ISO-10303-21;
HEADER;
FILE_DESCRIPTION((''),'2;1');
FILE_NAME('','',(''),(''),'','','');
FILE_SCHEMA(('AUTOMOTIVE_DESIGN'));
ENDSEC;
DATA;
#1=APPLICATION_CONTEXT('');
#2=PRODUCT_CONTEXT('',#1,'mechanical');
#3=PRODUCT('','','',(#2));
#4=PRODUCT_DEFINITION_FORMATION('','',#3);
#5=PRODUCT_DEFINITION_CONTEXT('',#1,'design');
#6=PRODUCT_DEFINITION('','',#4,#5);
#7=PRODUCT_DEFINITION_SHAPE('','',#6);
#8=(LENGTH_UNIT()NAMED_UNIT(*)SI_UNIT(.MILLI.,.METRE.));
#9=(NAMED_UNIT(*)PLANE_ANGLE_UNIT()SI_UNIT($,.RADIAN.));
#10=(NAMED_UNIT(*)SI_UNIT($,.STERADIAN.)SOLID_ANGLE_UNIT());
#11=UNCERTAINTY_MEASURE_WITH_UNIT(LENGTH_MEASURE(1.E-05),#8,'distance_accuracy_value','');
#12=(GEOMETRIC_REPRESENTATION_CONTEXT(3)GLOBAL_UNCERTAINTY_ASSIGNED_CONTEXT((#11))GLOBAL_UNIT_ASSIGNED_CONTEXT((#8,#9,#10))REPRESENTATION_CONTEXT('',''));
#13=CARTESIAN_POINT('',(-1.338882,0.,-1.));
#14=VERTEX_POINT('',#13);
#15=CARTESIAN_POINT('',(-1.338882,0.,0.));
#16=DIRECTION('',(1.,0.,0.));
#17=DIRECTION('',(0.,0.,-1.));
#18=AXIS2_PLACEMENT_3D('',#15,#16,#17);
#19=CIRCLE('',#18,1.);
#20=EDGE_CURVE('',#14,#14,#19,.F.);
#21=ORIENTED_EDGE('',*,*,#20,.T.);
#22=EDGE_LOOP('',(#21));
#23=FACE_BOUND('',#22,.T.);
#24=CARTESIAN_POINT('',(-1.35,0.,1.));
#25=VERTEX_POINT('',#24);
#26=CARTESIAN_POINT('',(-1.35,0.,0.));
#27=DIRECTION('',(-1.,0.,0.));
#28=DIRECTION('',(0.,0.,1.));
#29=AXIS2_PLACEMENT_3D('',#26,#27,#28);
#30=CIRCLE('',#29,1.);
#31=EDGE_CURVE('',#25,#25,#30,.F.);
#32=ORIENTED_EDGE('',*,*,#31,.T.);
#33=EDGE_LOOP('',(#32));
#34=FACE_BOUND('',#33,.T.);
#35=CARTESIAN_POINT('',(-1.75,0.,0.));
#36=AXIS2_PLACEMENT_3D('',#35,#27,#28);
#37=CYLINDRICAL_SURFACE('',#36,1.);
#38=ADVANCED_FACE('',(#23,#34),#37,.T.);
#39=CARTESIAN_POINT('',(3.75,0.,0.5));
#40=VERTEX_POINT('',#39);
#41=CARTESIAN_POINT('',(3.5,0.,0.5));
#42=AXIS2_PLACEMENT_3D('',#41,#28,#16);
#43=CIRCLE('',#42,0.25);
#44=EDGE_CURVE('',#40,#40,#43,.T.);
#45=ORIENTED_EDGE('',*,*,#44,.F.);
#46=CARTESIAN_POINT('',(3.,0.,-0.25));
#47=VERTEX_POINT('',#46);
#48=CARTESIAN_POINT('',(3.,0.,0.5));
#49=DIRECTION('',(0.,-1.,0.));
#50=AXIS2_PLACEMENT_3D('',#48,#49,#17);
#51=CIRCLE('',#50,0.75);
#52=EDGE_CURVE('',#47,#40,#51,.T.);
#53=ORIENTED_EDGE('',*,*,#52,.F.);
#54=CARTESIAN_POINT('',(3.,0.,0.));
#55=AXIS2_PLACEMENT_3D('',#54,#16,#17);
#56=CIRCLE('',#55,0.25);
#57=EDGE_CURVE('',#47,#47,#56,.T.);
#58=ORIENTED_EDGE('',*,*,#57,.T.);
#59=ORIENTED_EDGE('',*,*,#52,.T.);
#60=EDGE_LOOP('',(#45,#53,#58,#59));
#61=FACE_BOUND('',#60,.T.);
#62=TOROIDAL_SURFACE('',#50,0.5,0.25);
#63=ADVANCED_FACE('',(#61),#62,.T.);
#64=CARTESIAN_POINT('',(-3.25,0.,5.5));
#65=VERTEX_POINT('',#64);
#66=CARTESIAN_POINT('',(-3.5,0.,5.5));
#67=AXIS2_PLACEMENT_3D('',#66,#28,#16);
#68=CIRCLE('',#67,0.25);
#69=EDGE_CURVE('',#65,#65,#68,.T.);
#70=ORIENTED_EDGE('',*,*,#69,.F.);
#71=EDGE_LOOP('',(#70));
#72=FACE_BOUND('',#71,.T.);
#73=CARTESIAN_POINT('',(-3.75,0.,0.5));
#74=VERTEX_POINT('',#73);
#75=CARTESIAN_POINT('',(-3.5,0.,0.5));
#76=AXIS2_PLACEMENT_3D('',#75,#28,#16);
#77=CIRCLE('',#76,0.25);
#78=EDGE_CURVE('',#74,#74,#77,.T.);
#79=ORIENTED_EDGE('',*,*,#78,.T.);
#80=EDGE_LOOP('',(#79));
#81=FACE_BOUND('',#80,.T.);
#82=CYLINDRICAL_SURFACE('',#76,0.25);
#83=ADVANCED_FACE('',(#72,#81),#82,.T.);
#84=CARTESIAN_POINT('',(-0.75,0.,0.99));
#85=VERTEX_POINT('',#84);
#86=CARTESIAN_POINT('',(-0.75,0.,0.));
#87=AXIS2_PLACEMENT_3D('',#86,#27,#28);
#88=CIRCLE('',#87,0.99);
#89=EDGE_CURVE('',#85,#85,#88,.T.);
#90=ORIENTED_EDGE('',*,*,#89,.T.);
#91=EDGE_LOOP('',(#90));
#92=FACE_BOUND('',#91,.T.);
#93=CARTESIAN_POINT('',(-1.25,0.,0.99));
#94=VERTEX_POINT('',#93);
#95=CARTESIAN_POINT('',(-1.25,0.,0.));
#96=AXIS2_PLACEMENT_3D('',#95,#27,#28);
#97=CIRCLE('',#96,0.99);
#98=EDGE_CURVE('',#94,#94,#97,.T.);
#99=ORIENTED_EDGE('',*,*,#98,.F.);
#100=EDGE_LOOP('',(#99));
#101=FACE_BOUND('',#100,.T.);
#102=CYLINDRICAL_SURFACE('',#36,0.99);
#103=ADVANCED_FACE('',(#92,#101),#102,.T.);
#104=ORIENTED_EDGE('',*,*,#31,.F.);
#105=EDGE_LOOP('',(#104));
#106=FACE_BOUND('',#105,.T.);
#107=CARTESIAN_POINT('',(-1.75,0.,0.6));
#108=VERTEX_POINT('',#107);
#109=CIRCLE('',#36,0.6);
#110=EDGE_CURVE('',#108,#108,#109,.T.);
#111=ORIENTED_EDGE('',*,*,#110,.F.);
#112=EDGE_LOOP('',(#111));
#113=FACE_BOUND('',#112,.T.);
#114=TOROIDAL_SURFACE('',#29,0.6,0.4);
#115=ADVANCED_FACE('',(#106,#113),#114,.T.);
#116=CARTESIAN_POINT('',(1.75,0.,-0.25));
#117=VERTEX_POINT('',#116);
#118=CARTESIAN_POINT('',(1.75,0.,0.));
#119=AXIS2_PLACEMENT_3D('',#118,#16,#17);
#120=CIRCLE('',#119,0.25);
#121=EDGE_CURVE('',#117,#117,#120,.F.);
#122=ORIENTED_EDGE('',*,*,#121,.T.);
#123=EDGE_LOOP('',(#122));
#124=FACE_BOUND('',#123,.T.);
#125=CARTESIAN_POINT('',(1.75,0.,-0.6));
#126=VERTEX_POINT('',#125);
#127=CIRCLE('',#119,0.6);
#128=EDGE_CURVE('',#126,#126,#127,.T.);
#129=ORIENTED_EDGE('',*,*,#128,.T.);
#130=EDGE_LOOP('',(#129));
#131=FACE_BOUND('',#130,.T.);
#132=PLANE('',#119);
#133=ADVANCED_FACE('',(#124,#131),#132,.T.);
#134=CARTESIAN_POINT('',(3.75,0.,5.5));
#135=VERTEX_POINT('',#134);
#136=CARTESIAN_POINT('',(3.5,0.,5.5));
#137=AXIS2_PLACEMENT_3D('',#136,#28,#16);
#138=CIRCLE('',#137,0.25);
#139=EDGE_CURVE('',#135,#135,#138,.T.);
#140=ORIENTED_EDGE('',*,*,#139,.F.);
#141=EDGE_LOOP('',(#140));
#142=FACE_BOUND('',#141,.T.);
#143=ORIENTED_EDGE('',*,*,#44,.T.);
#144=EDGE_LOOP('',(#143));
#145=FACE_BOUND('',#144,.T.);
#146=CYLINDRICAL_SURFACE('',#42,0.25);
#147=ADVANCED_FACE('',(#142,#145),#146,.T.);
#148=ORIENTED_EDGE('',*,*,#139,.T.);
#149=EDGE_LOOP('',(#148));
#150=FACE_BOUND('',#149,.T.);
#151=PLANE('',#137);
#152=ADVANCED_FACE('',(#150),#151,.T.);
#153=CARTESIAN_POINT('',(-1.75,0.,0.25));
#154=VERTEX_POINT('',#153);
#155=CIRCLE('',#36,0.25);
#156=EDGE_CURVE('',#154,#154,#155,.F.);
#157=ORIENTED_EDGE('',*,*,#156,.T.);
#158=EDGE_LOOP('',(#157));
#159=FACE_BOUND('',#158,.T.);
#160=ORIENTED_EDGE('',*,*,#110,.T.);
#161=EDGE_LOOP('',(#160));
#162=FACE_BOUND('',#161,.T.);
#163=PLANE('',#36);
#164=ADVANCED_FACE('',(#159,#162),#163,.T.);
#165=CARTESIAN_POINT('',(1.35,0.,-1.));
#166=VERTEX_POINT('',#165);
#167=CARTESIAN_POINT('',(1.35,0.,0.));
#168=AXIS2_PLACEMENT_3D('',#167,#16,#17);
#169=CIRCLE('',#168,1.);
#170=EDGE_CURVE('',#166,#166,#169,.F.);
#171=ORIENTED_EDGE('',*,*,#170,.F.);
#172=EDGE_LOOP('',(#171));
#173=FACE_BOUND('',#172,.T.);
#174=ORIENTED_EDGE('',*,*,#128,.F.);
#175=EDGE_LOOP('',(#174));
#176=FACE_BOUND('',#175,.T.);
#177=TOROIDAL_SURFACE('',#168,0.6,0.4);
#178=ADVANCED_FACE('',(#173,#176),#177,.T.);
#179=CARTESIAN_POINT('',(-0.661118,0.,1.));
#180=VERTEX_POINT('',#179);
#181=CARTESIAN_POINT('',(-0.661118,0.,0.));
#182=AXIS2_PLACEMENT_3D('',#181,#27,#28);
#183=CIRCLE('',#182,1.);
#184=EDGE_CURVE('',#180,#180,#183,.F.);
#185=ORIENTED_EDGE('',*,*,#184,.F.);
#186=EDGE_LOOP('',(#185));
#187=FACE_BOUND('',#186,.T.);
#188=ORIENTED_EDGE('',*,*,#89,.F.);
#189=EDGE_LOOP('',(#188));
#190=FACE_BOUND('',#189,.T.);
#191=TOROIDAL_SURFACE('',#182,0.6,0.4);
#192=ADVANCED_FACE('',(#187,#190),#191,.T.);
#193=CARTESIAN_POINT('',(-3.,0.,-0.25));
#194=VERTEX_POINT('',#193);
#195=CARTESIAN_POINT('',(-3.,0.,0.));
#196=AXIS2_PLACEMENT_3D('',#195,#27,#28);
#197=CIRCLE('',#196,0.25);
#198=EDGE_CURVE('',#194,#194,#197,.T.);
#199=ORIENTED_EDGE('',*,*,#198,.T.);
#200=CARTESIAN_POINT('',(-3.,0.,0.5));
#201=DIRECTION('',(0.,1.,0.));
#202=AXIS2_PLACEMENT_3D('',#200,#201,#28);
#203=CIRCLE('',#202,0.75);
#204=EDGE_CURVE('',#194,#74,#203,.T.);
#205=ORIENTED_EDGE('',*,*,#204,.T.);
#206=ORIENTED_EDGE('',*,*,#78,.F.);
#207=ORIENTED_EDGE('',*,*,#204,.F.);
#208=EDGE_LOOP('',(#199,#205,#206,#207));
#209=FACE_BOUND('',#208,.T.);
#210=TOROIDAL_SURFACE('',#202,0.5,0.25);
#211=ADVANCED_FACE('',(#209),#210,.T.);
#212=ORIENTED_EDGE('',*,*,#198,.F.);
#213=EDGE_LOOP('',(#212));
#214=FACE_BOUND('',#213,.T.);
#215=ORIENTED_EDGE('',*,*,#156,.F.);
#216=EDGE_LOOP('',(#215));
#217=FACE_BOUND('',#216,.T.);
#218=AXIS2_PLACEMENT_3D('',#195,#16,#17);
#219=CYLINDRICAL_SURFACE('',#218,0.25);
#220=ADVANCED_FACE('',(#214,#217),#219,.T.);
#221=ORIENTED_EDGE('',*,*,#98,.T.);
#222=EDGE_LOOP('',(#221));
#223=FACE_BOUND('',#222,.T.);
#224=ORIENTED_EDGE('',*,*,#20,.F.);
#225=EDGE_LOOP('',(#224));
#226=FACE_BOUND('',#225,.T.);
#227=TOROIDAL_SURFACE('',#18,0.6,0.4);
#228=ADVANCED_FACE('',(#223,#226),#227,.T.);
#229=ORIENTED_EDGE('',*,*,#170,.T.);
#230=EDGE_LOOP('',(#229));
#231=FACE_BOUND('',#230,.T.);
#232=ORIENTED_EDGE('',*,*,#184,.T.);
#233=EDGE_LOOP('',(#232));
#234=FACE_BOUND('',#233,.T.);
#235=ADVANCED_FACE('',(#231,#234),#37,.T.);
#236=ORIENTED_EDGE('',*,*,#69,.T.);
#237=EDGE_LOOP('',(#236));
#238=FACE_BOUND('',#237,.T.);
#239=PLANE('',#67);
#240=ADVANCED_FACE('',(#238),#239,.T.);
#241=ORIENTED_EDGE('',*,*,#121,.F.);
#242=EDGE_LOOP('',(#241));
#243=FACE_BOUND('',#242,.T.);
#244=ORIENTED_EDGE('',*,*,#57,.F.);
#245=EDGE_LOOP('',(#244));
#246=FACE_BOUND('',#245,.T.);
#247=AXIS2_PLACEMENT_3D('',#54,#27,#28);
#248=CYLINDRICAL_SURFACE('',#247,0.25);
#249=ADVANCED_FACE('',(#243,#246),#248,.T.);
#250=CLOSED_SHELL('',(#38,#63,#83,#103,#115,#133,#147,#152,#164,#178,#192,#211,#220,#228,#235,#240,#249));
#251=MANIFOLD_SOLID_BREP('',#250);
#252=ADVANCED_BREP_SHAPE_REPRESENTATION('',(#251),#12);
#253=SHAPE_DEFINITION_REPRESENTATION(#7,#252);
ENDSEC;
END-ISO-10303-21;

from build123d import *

# Parameters (mm, degrees)
IZIM5_R   = 0.25
IZIM7_R   = 0.25
RADYUS1_R = 0.4
RADYUS2_R = 0.4


with BuildPart() as part:
    # Çizim3 → Döndür2 (revolve)
    with BuildSketch(Plane(origin=(0, 0, 0), x_dir=(1, 0, 0), z_dir=(0, 1, 0))):
        Polygon((-0.75, -1), (1.75, -1), (1.75, 0), (-1.75, 0), (-1.75, -1), (-1.25, -1), (-1.25, -0.99), (-0.75, -0.99), align=None)
    revolve(axis=Axis((-1.75, 0, 0), (1, 0, 0)))

    # Süpür1: sweep along a path in Çizim4
    with BuildLine(Plane(origin=(0, 0, 0), x_dir=(1, 0, 0), z_dir=(0, 1, 0))) as s_p_r1_path:
        Line((-1.578677494, 0), (-3, 0))
        ThreePointArc((-3, 0), (-3.353553391, -0.146446609), (-3.5, -0.5))
        Line((-3.5, -0.5), (-3.5, -5.5))
    # Çizim5 → Süpür1 (sweep)
    with BuildSketch(Plane.ZY.offset(1.578677494)):
        Circle(IZIM5_R)
    sweep(path=s_p_r1_path.line)

    # Süpür2: sweep along a path in Çizim6
    with BuildLine(Plane(origin=(0, 0, 0), x_dir=(1, 0, 0), z_dir=(0, 1, 0))) as s_p_r2_path:
        Line((1.519396703, 0), (3, 0))
        ThreePointArc((3, 0), (3.353553391, -0.146446609), (3.5, -0.5))
        Line((3.5, -0.5), (3.5, -5.5))
    # Çizim7 → Süpür2 (sweep)
    with BuildSketch(Plane(origin=(1.519396703, 0, 0), x_dir=(0, 0, -1), z_dir=(1, 0, 0))):
        Circle(IZIM7_R)
    sweep(path=s_p_r2_path.line)

    # Radyus1
    # the kernel refuses this fillet: 0.4 mm, written as the material it takes off along each edge
    with BuildSketch(Plane(origin=(1.75, 0, 0), x_dir=(0, 0, 1), z_dir=(0, 1, 0))) as radyus1_piece_1:
        with BuildLine():
            CenterArc((1 - RADYUS1_R, -RADYUS1_R), RADYUS1_R, 0, 90)
            Line((1 - RADYUS1_R, 0), (1 - RADYUS1_R, RADYUS1_R * 0.02))
            Line((1 - RADYUS1_R, RADYUS1_R * 0.02), (1 + RADYUS1_R * 0.02, RADYUS1_R * 0.02))
            Line((1 + RADYUS1_R * 0.02, RADYUS1_R * 0.02), (1 + RADYUS1_R * 0.02, -RADYUS1_R))
            Line((1 + RADYUS1_R * 0.02, -RADYUS1_R), (1, -RADYUS1_R))
        make_face()
    revolve(axis=Axis((1.75, 0, 0), (1, 0, 0)), mode=Mode.SUBTRACT)
    with BuildSketch(Plane(origin=(-0.75, 0, 0), x_dir=(0, 0, 1), z_dir=(0, 1, 0))) as radyus1_piece_2:
        with BuildLine():
            CenterArc((0.6, 0.088881944), RADYUS1_R, 347.161431859, 12.838568141)
            Line((0.99, 0), (0.9978, -0.001777639))
            ThreePointArc((0.9978, -0.001777639), (0.995, -0.008), (1, -0.008))
            Line((1, -0.008), (1.008, 0))
            Line((1.008, 0), (1.008, 0.088881944))
            Line((1.008, 0.088881944), (1, 0.088881944))
        make_face()
    revolve(axis=Axis((-0.75, 0, 0), (1, 0, 0)), mode=Mode.SUBTRACT)

    # Radyus2
    # the kernel refuses this fillet: 0.4 mm, written as the material it takes off along each edge
    with BuildSketch(Plane(origin=(-1.25, 0, 0), x_dir=(0, 0, 1), z_dir=(0, 1, 0))) as radyus2_piece_1:
        with BuildLine():
            CenterArc((0.6, -0.088881944), RADYUS2_R, 0, 12.838568141)
            Line((1, -0.088881944), (1.008, -0.088881944))
            Line((1.008, -0.088881944), (1.008, 0))
            Line((1.008, 0), (1, 0.008))
            ThreePointArc((1, 0.008), (0.995, 0.008), (0.9978, 0.001777639))
            Line((0.9978, 0.001777639), (0.99, 0))
        make_face()
    revolve(axis=Axis((-1.25, 0, 0), (1, 0, 0)), mode=Mode.SUBTRACT)
    with BuildSketch(Plane(origin=(-1.75, 0, 0), x_dir=(0, 0, 1), z_dir=(0, 1, 0))) as radyus2_piece_2:
        with BuildLine():
            CenterArc((1 - RADYUS2_R, RADYUS2_R), RADYUS2_R, 270, 90)
            Line((1 - RADYUS2_R, 0), (1 - RADYUS2_R, -RADYUS2_R * 0.02))
            Line((1 - RADYUS2_R, -RADYUS2_R * 0.02), (1 + RADYUS2_R * 0.02, -RADYUS2_R * 0.02))
            Line((1 + RADYUS2_R * 0.02, -RADYUS2_R * 0.02), (1 + RADYUS2_R * 0.02, RADYUS2_R))
            Line((1 + RADYUS2_R * 0.02, RADYUS2_R), (1, RADYUS2_R))
        make_face()
    revolve(axis=Axis((-1.75, 0, 0), (1, 0, 0)), mode=Mode.SUBTRACT)


solid = part.part
